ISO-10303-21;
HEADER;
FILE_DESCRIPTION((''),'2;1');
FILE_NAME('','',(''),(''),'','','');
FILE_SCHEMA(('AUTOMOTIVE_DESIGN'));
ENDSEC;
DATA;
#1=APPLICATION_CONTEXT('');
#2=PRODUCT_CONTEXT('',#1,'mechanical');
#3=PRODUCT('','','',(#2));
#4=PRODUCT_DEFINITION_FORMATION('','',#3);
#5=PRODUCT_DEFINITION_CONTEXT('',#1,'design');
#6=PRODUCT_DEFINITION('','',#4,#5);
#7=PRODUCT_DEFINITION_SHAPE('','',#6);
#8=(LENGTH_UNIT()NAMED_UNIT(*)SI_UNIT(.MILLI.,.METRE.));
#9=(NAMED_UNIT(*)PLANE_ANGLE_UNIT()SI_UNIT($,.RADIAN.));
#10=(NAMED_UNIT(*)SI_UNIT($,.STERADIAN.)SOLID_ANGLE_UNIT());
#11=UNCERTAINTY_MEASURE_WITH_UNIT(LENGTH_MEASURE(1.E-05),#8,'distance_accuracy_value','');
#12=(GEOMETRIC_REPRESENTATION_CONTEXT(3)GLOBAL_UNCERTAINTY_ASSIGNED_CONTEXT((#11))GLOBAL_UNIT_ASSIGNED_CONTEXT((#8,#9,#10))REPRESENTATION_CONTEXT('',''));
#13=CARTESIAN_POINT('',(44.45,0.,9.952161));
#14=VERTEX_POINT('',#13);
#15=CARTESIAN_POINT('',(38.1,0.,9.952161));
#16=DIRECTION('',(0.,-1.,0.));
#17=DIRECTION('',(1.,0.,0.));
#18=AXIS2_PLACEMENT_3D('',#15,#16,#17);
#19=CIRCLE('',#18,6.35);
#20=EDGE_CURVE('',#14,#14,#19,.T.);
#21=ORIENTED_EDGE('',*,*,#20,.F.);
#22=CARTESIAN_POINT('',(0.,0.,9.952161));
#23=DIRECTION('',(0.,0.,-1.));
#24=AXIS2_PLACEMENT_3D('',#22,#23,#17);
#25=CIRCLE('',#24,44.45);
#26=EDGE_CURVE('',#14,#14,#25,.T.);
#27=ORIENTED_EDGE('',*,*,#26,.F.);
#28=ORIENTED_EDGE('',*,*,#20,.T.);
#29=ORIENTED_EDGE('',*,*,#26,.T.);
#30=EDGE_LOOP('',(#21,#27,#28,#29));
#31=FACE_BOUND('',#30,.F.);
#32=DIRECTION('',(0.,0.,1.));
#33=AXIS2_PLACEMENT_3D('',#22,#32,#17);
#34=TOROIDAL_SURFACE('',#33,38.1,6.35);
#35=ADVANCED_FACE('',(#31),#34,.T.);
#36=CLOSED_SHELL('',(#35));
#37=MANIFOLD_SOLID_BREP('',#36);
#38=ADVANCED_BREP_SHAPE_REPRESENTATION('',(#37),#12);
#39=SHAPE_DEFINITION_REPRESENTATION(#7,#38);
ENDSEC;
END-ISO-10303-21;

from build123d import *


# Not quite as in the source:
# - a feature of the source that left no trace in its solid (it failed there, or was rolled back) is left out


with BuildPart() as f1:
    # F0 (on Front) → F1 (revolve)
    with BuildSketch(Plane.XZ):
        with BuildLine():
            ThreePointArc((31.75, 9.9521605298), (38.1, 3.6021605298), (44.45, 9.9521605298))
            ThreePointArc((44.45, 9.9521605298), (38.1, 16.3021605298), (31.75, 9.9521605298))
        make_face()
    revolve(axis=Axis((0, 0, 0.1856796443), (0, 0, -1)))


solid = f1.part
